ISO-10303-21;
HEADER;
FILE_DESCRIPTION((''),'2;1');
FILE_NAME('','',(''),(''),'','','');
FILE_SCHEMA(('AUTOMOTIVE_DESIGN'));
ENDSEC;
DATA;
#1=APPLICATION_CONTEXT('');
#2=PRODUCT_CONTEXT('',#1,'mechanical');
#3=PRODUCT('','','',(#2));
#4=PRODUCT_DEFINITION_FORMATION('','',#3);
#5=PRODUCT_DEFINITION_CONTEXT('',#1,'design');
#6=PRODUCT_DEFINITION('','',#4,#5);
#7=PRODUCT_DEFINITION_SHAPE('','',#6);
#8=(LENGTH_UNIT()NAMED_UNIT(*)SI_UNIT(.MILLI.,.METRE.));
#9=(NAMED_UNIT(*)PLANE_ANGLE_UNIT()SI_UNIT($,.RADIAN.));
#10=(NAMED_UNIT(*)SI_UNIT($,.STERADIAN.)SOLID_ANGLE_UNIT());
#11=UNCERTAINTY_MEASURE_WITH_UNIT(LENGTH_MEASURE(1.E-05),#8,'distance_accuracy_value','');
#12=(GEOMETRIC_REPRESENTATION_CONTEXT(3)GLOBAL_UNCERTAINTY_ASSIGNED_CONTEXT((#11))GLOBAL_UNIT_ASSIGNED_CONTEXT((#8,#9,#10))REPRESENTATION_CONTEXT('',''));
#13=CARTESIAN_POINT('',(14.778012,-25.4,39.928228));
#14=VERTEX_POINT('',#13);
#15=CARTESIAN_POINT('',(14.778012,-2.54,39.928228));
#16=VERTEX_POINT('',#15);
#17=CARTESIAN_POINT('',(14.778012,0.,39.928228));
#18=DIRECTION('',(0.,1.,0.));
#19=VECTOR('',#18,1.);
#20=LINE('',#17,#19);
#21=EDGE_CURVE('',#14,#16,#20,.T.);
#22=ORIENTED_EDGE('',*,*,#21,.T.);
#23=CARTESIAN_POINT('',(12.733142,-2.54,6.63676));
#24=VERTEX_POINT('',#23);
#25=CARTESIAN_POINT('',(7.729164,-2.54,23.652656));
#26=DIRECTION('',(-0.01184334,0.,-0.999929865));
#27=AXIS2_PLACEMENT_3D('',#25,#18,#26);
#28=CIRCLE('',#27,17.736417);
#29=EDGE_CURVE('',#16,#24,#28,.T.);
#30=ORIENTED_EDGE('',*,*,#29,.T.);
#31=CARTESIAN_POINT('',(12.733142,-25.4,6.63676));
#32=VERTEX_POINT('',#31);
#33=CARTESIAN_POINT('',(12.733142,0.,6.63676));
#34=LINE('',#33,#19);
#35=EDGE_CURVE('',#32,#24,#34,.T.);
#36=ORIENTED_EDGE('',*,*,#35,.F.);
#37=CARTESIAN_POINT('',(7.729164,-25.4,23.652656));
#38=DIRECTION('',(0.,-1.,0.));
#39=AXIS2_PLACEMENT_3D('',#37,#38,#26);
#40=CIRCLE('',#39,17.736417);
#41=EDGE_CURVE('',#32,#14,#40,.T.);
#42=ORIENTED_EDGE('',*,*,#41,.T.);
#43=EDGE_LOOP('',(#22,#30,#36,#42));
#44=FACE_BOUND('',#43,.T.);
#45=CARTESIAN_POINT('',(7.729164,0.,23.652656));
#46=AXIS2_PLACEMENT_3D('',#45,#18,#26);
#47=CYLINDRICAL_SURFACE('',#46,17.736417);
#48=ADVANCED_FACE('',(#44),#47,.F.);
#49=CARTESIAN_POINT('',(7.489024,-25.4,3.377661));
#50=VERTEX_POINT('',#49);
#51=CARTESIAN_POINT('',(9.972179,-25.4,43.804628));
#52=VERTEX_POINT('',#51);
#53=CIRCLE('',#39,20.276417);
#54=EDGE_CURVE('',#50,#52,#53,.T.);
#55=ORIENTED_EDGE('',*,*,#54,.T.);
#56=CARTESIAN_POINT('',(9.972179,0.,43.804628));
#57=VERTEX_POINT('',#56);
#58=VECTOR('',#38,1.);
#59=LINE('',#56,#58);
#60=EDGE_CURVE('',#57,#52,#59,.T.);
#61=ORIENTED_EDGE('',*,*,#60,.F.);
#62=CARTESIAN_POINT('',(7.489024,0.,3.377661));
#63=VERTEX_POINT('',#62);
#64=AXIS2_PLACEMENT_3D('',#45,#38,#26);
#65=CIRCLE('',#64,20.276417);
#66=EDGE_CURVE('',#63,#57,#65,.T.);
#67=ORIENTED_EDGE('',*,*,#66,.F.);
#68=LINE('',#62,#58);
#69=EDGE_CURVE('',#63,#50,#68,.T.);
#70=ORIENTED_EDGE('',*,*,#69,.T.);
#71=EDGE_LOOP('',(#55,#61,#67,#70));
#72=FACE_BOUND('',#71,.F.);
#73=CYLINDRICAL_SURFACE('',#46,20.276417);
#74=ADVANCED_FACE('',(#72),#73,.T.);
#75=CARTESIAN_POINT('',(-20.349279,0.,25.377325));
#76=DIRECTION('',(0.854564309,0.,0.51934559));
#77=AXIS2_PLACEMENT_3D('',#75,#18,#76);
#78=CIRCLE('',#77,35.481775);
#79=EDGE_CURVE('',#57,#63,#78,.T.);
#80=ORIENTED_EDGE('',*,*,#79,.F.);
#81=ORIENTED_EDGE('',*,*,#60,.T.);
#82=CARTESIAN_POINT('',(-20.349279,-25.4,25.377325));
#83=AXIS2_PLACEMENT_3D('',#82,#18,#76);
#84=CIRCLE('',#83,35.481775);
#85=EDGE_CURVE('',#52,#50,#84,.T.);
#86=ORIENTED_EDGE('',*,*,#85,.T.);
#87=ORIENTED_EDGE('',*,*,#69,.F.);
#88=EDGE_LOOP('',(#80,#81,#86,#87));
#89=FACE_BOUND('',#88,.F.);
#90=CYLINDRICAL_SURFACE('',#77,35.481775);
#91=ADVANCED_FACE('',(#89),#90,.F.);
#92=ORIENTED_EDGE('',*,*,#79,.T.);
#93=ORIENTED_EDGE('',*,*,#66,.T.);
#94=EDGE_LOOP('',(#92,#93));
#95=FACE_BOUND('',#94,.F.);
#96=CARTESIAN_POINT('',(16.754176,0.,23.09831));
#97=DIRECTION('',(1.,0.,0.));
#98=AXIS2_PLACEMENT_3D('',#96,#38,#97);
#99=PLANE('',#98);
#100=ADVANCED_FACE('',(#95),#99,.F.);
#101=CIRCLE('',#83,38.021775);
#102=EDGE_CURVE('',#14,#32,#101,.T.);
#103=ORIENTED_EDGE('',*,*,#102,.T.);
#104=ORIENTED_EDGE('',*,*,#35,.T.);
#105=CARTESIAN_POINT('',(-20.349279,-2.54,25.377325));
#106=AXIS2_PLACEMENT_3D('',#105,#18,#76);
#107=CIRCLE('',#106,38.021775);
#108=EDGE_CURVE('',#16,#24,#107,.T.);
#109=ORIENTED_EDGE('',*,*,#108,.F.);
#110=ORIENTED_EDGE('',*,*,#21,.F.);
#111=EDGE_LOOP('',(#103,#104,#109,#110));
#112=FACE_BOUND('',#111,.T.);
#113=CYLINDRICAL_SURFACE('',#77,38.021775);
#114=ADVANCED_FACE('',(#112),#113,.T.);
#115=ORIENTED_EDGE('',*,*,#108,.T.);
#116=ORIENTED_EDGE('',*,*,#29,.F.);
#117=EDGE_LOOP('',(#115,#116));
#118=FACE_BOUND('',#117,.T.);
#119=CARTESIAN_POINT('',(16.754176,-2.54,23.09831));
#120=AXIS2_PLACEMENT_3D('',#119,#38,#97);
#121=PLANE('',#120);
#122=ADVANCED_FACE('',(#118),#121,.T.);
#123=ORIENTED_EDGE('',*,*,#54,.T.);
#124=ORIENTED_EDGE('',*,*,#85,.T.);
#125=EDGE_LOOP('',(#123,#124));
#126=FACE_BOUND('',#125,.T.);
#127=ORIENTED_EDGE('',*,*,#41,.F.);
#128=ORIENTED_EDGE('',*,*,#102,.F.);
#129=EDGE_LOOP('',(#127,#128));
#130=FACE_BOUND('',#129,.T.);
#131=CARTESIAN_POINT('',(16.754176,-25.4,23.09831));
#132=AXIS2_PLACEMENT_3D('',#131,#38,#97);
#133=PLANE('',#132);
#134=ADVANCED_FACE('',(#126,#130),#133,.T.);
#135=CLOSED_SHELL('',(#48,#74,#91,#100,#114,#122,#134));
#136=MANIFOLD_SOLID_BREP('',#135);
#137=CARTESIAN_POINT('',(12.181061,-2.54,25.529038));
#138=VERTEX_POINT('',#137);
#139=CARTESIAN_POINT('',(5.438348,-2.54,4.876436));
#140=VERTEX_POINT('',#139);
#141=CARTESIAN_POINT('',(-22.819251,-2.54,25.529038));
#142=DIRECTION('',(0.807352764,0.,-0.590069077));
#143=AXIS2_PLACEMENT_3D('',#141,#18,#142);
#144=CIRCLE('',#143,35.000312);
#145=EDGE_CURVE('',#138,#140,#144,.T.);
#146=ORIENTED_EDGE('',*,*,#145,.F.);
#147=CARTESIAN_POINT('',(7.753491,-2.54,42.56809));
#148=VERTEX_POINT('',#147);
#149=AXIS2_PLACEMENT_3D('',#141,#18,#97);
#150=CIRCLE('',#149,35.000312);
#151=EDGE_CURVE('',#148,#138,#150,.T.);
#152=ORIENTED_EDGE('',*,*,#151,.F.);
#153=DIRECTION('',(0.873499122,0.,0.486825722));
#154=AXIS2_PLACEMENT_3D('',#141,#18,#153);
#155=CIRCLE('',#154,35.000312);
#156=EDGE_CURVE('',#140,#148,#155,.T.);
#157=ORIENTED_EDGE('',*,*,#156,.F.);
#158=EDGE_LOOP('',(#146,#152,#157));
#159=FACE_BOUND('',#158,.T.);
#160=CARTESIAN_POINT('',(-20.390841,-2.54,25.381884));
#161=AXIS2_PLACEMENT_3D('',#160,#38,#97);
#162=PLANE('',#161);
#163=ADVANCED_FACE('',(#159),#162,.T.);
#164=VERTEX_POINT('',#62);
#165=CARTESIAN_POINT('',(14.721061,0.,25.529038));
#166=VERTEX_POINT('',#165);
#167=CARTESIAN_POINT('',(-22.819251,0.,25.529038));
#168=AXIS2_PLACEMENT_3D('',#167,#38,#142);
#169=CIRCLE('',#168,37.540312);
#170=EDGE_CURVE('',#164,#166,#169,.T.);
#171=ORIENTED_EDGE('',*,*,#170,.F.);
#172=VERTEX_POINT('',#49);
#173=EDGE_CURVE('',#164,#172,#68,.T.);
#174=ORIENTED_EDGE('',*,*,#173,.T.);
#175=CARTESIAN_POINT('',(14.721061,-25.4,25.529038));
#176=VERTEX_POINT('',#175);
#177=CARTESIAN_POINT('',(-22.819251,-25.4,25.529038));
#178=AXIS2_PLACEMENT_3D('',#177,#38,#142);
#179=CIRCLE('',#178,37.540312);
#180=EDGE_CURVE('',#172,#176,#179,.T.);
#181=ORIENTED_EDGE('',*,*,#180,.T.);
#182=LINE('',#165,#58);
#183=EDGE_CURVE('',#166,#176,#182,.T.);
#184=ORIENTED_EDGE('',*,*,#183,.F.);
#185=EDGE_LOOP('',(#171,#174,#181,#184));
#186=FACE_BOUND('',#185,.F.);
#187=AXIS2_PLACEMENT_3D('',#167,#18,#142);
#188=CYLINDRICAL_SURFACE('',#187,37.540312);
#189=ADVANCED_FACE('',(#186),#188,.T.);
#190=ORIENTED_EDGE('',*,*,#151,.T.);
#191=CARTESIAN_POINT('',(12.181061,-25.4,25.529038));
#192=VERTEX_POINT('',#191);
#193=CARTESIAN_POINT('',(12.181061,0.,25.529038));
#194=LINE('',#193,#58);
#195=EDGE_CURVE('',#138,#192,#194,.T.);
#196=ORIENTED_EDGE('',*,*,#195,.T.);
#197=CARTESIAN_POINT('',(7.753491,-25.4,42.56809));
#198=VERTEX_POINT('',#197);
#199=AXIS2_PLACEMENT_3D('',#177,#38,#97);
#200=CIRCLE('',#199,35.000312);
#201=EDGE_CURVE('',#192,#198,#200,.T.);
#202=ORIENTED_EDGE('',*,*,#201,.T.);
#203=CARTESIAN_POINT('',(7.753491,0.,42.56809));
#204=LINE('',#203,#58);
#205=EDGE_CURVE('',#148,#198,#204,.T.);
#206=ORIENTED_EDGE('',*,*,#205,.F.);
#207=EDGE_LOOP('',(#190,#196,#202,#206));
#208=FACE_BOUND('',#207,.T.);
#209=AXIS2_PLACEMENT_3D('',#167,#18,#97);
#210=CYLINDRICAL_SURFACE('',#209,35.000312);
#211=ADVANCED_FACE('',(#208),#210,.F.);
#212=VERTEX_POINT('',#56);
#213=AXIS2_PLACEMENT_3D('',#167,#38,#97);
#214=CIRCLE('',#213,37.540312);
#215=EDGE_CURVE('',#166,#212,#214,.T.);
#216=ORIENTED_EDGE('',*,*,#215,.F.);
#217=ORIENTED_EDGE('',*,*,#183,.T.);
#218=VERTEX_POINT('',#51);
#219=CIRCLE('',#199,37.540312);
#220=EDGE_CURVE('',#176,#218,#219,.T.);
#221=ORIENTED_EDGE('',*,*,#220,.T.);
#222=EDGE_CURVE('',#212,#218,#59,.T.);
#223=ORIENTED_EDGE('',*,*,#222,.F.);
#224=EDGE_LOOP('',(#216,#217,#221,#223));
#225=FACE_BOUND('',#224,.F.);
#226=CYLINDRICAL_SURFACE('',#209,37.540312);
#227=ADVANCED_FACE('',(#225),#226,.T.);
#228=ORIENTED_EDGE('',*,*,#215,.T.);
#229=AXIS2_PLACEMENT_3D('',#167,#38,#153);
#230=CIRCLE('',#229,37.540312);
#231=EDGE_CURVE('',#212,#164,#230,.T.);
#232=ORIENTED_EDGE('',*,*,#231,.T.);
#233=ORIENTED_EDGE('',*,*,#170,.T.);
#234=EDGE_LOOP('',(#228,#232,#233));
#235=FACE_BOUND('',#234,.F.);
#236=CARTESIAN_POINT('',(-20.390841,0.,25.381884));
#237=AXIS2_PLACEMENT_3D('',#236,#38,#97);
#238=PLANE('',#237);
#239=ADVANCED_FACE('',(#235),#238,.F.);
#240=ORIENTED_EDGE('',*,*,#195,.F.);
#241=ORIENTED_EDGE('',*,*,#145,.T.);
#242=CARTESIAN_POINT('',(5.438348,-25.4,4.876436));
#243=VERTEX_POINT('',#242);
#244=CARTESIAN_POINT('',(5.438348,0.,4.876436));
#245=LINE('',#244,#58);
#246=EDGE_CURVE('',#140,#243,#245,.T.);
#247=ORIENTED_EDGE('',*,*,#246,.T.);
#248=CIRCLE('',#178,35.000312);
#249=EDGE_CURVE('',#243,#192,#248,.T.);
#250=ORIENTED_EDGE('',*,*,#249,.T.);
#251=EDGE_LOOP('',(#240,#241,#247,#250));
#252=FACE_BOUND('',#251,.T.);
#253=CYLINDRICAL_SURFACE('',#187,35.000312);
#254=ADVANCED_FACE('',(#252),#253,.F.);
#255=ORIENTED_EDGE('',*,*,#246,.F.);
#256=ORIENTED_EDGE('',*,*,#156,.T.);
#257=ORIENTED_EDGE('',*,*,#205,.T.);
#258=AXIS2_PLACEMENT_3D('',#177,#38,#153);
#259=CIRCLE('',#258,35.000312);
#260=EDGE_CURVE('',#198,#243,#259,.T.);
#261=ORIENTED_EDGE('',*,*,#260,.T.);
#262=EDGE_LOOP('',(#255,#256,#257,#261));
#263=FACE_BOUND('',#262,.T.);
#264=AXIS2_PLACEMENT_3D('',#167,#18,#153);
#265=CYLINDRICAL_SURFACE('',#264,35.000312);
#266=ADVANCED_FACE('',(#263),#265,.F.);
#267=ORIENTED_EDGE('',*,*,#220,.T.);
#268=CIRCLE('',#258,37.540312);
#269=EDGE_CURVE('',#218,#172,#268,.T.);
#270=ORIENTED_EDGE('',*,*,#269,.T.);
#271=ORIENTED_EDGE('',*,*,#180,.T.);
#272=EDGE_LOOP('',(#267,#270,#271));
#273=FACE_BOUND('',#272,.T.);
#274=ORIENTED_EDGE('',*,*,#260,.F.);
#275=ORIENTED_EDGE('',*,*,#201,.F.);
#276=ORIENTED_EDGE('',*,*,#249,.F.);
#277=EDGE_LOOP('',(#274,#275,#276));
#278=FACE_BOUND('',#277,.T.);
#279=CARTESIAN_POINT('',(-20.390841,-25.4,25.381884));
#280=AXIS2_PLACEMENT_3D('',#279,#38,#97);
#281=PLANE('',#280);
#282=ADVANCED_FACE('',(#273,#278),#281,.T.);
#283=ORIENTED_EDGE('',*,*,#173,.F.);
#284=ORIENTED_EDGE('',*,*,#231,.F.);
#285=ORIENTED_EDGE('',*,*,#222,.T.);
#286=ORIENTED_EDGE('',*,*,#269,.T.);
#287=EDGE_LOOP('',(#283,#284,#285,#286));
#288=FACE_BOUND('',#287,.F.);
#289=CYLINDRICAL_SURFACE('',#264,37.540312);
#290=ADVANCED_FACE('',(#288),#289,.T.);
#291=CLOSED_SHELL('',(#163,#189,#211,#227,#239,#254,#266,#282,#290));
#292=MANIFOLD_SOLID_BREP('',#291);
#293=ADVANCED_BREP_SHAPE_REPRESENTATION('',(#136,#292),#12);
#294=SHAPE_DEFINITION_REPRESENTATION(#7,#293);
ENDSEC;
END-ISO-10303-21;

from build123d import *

# Parameters (mm, degrees)
F1_DEPTH = 25.4
F2_T     = -2.54
F2_2_T   = -2.54


with BuildPart() as f1:
    # F0 (on Front) → F1 (new body)
    with BuildSketch(Plane.XZ):
        with BuildLine():
            ThreePointArc((7.4890239755, 3.3776608035), (12.8672812185, 13.8780094101), (14.7210613775, 25.529038161))
            ThreePointArc((14.7210613775, 25.529038161), (13.5144494489, 34.9702915027), (9.9721789394, 43.8046277339))
            ThreePointArc((9.9721789394, 43.8046277339), (-60.2889464795, 27.8305479659), (7.4890239755, 3.3776608035))
        make_face()
    extrude(amount=F1_DEPTH)

    # F2#2
    f2_2_openings = [f1.faces().sort_by_distance(p)[0] for p in [
        (-22.819251, -25.4, 25.529038),
    ]]
    offset(amount=F2_2_T, openings=f2_2_openings)


with BuildPart() as f1b:
    # F0 (on Front) → F1, piece 2 (new body)
    with BuildSketch(Plane.XZ):
        with BuildLine():
            ThreePointArc((7.4890239755, 3.3776608035), (27.9674398386, 22.4095554842), (9.9721789394, 43.8046277339))
            ThreePointArc((9.9721789394, 43.8046277339), (15.0657511021, 23.2020189031), (7.4890239755, 3.3776608035))
        make_face()
    extrude(amount=F1_DEPTH)

    # F2
    f2_openings = [f1b.faces().sort_by_distance(p)[0] for p in [
        (19.125855, -25.4, 22.952634),
    ]]
    offset(amount=F2_T, openings=f2_openings)


solid = Compound([f1.part, f1b.part])
